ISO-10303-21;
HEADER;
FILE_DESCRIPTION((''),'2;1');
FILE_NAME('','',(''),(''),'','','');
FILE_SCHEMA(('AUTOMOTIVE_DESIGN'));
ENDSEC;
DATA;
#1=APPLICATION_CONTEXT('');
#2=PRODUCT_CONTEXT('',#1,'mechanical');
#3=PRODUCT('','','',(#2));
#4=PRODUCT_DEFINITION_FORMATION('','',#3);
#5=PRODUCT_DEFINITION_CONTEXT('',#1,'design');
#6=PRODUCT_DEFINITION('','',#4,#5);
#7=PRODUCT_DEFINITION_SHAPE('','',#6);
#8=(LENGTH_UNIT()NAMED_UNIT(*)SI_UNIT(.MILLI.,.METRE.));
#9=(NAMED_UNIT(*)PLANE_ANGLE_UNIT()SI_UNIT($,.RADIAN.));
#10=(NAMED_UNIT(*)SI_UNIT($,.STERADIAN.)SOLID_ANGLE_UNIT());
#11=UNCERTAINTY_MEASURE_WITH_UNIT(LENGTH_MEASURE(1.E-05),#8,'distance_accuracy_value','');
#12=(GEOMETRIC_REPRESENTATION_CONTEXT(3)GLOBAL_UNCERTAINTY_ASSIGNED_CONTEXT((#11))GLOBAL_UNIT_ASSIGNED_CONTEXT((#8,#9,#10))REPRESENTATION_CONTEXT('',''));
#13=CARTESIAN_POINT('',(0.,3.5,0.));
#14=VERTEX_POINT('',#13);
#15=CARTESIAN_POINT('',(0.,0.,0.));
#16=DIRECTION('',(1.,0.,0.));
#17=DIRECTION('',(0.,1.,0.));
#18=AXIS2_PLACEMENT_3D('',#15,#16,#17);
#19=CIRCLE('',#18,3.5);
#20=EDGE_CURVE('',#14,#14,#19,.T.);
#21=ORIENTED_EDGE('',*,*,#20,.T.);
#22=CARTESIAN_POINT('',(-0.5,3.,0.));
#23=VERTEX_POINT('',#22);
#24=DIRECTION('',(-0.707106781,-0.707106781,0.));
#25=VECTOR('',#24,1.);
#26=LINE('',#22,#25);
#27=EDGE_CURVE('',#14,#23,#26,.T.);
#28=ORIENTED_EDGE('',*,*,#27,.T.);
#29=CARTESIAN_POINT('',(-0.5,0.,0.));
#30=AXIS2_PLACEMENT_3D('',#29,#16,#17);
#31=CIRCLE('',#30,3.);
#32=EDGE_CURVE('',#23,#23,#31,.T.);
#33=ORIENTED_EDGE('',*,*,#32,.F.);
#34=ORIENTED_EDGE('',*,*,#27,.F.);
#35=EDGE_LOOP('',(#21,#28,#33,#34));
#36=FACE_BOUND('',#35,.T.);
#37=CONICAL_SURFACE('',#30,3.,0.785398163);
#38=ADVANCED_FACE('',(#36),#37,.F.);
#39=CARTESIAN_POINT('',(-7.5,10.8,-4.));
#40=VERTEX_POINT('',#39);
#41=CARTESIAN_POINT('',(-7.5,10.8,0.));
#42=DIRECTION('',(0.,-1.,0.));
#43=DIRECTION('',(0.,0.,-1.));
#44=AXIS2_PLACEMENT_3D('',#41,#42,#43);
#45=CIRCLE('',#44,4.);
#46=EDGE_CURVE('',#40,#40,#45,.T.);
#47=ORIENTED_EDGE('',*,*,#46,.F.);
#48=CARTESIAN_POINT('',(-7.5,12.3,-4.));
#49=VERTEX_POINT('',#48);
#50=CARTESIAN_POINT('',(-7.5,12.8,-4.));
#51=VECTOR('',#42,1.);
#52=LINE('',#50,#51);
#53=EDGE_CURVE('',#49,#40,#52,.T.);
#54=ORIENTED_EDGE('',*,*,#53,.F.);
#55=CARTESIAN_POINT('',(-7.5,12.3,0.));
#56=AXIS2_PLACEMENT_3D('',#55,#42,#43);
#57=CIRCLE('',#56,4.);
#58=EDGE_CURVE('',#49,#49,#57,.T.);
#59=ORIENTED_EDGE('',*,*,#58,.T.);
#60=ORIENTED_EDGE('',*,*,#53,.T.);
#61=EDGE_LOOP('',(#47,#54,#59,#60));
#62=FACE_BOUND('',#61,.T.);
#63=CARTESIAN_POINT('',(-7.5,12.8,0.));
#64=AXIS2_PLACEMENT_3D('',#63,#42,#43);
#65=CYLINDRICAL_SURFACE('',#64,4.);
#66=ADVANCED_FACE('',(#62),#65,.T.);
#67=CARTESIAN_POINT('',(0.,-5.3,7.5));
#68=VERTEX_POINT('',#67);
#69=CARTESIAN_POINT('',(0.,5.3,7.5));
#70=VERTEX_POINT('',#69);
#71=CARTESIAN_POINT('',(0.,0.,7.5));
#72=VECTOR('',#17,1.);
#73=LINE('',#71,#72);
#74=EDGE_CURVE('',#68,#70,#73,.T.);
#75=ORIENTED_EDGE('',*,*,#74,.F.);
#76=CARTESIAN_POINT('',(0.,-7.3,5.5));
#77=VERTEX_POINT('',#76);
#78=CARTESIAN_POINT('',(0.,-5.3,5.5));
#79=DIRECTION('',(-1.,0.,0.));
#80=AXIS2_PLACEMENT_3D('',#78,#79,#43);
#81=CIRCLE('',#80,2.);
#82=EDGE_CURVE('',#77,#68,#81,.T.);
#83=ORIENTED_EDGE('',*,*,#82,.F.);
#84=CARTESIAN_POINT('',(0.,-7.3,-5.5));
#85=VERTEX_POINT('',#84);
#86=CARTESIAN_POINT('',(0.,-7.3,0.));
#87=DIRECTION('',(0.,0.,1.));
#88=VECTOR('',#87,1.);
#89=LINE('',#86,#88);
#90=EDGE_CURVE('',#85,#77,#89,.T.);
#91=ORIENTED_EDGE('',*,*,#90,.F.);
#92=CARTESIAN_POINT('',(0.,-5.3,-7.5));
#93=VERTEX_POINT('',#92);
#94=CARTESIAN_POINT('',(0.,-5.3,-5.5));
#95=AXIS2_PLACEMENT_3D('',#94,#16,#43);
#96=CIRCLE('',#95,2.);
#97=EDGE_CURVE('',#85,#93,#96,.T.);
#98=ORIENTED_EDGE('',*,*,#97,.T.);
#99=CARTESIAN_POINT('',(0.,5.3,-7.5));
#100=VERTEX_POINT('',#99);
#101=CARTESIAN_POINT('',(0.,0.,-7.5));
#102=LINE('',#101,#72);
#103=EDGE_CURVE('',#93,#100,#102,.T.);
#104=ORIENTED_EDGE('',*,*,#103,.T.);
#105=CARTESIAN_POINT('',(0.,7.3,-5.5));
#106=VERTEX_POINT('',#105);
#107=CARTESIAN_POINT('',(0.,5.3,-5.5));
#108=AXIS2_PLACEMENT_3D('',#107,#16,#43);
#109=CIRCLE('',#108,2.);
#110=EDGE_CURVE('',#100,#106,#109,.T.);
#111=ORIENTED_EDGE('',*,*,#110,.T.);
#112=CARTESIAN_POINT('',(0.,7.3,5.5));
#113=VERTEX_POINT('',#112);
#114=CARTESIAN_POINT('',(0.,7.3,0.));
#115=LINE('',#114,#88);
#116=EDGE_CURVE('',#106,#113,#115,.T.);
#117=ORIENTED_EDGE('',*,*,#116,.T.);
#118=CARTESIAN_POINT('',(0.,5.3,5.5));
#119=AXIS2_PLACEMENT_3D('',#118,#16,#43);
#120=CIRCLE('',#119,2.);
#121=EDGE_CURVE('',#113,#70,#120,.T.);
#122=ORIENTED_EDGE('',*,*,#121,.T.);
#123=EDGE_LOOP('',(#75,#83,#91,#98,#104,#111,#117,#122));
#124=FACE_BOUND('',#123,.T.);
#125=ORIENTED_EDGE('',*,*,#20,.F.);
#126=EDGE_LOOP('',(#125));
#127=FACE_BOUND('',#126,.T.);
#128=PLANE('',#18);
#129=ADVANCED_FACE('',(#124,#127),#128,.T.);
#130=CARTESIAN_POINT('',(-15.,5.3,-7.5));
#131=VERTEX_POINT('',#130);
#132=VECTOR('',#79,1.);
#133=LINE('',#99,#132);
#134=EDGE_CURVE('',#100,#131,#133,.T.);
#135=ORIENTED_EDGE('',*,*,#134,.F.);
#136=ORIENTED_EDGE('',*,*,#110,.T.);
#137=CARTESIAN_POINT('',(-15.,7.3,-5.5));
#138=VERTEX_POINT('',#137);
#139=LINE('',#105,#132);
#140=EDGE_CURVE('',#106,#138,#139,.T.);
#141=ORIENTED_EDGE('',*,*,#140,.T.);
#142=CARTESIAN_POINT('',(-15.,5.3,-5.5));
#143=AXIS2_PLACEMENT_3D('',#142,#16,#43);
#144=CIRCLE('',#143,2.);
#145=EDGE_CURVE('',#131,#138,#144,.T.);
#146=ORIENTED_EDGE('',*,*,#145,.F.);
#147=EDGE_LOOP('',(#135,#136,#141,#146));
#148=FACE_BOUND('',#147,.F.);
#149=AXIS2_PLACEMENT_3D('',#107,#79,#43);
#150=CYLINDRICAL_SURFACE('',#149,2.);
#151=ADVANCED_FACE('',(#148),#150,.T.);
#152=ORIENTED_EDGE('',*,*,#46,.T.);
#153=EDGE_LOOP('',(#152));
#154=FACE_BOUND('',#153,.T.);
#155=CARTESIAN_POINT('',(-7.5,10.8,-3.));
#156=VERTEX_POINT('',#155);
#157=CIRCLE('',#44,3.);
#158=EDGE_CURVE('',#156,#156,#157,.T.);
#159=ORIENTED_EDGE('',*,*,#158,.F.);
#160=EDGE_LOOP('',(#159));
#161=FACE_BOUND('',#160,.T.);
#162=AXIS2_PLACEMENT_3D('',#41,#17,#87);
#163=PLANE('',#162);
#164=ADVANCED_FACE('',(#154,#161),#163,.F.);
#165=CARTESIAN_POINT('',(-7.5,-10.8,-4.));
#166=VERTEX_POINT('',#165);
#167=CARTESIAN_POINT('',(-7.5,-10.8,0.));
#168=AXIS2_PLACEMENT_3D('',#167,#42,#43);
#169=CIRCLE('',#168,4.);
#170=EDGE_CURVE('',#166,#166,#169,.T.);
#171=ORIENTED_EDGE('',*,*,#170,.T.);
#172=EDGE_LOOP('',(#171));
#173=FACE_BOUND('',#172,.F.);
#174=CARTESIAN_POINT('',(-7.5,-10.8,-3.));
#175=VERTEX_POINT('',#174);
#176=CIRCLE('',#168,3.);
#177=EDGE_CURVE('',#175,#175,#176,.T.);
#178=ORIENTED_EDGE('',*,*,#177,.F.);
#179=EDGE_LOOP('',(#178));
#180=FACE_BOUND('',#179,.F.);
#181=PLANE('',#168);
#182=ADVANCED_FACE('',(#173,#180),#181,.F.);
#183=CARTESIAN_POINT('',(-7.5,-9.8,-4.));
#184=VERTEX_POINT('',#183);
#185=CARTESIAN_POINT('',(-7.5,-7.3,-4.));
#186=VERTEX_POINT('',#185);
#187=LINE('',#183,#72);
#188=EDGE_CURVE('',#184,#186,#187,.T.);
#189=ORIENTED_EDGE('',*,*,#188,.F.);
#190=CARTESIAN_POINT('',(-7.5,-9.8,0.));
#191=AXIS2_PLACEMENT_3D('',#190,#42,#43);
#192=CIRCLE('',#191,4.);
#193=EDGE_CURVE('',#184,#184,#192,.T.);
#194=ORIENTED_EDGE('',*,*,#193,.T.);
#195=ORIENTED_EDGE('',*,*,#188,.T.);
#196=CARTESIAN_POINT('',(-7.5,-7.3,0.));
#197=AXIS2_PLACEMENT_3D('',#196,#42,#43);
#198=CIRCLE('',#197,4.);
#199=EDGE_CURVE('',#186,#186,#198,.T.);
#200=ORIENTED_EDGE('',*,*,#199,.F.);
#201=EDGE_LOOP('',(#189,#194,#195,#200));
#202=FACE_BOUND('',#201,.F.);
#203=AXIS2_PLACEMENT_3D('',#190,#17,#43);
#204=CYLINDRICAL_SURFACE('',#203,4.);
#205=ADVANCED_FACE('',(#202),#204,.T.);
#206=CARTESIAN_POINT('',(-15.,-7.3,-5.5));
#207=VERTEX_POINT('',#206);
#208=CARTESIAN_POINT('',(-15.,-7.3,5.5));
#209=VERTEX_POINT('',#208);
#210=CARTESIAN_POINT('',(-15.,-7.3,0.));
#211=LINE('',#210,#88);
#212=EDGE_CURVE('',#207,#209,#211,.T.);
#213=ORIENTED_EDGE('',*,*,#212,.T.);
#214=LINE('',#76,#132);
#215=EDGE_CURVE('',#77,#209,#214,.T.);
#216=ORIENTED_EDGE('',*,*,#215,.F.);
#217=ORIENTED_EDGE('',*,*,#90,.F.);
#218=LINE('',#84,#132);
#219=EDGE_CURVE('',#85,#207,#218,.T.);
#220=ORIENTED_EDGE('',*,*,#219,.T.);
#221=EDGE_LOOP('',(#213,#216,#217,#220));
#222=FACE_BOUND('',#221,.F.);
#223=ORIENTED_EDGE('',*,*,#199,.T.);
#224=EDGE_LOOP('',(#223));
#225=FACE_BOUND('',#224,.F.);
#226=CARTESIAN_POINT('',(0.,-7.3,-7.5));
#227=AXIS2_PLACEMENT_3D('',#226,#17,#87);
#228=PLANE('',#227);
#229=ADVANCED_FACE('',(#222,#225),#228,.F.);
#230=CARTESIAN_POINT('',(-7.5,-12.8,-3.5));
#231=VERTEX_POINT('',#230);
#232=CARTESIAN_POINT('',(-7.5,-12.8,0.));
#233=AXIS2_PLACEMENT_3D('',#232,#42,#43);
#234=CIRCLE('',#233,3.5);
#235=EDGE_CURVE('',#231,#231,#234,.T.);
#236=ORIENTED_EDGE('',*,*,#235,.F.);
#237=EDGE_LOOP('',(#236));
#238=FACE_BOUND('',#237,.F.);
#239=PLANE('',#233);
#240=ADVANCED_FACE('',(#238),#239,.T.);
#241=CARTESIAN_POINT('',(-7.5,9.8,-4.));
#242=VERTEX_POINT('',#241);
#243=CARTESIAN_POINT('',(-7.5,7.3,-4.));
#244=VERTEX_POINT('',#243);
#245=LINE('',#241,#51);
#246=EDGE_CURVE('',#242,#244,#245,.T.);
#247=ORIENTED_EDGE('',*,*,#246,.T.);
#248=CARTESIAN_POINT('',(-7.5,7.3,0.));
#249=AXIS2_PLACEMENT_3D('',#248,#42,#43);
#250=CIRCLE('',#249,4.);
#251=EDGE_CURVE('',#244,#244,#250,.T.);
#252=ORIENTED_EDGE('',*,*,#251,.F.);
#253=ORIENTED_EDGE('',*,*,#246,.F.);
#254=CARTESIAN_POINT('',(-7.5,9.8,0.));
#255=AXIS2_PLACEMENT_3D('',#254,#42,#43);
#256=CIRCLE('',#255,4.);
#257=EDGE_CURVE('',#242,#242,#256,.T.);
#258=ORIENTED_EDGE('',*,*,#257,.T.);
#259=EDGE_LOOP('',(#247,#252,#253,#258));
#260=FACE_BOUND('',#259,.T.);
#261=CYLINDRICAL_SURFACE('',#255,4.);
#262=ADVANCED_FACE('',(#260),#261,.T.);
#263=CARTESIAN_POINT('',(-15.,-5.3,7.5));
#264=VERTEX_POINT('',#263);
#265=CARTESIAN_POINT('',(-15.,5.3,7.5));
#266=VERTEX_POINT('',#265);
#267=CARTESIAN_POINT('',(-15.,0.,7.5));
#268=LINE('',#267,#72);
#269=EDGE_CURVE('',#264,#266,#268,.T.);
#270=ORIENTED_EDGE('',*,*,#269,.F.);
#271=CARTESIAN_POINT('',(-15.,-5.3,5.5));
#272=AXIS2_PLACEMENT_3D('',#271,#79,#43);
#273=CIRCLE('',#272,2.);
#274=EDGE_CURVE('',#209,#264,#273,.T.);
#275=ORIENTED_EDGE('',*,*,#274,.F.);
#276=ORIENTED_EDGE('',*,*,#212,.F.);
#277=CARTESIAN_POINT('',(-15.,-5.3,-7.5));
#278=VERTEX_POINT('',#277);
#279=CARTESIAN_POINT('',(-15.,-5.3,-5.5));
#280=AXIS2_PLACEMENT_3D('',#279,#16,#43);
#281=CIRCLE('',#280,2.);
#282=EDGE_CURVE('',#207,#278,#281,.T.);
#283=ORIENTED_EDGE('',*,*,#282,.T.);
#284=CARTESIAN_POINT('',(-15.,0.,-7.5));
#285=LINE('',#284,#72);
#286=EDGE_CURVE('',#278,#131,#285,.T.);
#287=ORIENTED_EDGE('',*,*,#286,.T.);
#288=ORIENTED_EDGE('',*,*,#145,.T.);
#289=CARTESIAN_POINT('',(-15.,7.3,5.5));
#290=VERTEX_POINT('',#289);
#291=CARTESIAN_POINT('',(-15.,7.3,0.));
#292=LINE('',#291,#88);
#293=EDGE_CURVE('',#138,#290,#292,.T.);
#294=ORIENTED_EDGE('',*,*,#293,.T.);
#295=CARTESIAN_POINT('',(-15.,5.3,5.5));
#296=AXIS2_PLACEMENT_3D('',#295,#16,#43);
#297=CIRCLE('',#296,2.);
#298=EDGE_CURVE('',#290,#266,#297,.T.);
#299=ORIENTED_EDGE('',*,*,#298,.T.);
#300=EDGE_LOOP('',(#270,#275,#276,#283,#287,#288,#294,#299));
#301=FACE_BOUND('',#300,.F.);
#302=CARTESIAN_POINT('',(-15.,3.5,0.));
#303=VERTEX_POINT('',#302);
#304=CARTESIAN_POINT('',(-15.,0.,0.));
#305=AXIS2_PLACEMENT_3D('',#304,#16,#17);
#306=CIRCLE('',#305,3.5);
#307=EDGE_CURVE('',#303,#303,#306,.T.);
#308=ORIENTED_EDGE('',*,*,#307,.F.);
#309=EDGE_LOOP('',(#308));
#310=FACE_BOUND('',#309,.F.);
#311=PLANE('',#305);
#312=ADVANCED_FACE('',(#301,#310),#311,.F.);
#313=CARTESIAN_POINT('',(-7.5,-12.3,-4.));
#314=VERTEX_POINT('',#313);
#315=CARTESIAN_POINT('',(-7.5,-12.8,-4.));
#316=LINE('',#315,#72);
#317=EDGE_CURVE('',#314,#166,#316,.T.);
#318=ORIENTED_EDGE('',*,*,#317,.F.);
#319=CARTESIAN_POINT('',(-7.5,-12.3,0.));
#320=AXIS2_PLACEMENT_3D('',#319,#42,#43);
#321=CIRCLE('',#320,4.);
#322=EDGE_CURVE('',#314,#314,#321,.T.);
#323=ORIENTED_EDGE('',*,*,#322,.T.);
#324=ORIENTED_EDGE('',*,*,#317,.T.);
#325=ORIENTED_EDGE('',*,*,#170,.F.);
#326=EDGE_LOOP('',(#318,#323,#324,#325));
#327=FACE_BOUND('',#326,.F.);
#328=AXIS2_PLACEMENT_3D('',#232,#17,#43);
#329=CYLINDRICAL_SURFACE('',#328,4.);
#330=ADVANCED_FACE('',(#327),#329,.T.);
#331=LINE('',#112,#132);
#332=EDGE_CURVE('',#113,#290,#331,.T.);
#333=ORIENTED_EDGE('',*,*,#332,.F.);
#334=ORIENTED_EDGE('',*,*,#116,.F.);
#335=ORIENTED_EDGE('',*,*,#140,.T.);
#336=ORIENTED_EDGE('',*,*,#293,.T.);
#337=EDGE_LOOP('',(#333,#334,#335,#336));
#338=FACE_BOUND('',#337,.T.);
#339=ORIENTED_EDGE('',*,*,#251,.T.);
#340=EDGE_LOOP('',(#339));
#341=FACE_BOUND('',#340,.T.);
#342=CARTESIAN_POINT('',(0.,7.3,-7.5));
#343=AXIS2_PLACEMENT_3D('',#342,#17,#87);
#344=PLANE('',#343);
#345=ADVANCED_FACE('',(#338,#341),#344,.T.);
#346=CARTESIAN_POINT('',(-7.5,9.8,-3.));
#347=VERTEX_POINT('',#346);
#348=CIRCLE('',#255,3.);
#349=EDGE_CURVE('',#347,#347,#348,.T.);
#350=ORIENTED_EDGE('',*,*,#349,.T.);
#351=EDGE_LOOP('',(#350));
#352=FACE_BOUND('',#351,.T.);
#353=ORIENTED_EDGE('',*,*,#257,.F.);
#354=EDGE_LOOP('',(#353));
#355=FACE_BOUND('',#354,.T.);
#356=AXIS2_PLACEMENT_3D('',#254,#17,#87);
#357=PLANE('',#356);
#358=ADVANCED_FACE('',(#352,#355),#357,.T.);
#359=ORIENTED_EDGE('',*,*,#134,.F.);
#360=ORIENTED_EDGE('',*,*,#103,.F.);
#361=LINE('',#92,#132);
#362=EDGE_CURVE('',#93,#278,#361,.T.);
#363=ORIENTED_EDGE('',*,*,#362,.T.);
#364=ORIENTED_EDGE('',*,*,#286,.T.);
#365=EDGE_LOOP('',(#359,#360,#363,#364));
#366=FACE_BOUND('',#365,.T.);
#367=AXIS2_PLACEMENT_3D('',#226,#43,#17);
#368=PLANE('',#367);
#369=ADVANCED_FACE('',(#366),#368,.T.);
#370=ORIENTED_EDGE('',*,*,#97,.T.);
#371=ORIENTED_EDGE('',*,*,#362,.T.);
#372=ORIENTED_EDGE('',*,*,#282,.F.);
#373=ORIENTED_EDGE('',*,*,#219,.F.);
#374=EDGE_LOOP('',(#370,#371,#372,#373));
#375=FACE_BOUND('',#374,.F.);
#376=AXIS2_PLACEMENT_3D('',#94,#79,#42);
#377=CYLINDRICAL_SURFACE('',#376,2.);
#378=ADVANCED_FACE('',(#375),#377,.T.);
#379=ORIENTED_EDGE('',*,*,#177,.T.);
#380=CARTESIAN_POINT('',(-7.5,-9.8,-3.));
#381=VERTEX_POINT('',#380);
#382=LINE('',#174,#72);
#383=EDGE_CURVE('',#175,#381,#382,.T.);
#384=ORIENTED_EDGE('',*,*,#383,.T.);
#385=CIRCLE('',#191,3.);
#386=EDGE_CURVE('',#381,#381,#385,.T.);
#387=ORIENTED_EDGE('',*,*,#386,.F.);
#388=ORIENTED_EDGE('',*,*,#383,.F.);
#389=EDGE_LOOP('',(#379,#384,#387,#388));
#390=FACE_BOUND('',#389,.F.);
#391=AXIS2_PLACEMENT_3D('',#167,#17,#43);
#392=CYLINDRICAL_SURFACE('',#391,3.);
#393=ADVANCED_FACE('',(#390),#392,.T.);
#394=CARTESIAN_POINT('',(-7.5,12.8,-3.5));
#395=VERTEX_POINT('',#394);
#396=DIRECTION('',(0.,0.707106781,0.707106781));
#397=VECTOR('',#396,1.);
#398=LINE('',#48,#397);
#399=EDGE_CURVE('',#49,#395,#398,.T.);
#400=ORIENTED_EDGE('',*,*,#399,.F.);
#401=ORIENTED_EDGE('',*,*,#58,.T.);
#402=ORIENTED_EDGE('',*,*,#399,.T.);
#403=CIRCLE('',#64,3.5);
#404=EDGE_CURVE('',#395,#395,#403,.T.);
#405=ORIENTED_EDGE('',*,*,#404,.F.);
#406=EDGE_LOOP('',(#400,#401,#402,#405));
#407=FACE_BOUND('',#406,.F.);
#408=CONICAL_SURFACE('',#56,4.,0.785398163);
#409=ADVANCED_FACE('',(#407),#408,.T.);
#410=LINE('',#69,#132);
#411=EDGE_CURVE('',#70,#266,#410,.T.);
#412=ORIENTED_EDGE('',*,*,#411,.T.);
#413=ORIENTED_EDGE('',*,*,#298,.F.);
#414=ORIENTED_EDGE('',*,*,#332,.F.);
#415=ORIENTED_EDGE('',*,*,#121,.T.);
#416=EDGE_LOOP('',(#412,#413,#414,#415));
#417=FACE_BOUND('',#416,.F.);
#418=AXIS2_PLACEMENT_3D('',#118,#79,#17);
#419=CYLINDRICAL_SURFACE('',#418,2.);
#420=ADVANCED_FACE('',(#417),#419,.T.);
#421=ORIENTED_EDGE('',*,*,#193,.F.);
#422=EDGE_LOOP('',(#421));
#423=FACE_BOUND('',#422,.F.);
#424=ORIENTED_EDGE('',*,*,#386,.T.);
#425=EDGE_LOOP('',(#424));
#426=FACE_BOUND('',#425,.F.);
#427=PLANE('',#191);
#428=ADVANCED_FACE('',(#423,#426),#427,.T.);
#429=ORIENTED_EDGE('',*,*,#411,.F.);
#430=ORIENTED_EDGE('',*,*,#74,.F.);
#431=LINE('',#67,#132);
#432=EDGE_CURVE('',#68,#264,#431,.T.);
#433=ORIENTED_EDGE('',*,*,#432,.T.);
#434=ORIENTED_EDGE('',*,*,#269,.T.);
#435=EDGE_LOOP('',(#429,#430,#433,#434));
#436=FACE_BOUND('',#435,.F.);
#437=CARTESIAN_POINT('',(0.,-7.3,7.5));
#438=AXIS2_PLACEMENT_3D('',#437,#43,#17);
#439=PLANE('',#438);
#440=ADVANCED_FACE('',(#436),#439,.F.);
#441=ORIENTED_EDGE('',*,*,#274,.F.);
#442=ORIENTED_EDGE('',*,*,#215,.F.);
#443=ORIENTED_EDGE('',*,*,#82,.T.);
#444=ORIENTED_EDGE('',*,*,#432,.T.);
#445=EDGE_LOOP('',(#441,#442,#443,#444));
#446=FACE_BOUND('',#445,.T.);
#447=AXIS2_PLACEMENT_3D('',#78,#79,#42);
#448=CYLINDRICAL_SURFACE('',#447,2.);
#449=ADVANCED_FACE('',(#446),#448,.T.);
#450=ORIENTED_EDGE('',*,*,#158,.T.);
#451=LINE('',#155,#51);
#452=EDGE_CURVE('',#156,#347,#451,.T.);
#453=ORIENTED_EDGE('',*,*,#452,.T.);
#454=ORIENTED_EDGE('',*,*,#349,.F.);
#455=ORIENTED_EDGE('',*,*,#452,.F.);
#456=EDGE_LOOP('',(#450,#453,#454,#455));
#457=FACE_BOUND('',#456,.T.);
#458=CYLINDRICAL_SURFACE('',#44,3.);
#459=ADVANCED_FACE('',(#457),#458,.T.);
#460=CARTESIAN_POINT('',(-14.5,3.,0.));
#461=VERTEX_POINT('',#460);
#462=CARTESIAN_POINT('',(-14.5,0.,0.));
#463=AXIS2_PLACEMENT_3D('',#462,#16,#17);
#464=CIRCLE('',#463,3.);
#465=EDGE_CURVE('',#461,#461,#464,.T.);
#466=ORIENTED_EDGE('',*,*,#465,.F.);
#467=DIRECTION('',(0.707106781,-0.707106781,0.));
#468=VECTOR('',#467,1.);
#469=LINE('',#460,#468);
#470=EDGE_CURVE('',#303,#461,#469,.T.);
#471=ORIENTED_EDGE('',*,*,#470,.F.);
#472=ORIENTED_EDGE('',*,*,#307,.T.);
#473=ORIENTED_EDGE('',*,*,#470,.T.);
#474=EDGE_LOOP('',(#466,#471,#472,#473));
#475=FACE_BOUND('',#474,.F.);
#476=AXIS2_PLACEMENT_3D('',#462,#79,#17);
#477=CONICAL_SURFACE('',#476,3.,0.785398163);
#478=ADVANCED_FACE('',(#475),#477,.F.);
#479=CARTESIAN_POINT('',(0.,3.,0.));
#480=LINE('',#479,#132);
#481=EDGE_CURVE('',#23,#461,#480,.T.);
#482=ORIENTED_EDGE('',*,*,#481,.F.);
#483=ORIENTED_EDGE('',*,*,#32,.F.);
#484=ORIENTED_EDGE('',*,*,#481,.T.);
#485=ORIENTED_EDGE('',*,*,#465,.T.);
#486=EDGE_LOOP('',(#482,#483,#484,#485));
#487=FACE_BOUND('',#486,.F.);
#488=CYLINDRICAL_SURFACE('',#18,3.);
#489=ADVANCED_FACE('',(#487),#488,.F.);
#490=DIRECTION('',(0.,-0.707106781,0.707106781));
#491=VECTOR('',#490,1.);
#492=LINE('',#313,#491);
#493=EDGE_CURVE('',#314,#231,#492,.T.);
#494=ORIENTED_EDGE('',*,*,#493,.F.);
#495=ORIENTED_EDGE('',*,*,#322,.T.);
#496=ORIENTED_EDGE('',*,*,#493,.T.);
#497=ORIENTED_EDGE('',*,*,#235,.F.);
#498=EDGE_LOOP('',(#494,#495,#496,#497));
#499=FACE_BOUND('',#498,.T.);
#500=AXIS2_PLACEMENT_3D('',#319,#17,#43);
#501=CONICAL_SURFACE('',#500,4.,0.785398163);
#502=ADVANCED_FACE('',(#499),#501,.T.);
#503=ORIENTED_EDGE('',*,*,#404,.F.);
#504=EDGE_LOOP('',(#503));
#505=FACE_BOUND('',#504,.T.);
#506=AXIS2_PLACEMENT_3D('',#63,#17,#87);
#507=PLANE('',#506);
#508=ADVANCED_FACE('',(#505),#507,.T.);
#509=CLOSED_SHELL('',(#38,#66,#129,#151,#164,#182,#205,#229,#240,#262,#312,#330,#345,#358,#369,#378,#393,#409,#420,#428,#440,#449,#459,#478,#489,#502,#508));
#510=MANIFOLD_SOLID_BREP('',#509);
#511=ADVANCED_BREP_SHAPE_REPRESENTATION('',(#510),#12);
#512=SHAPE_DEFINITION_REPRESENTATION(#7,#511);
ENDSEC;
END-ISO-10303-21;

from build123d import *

# Parameters (mm, degrees)
F0_W     = 14.6
F0_H     = 15
F1_DEPTH = 15
F2_R     = 2
F3_R     = 3
F4_DEPTH = 15.001
F5_SIZE2 = 0.5
F5_SIZE  = 0.5
F9_SIZE2 = 0.5
F9_SIZE  = 0.5


# Not quite as in the source:
# - a pattern or mirror of a feature is missing from the dataset's text; its kind, count and spacing are read off the source's solid


with BuildPart() as f1:
    # F0 (on Right) → F1 (new body)
    with BuildSketch(Plane.YZ):
        Rectangle(F0_W, F0_H)
    extrude(amount=-F1_DEPTH)

    # F2
    f2_edges = [f1.edges().sort_by_distance(p)[0] for p in [
        (-7.5, -7.3, 7.5),
        (-7.5, 7.3, 7.5),
        (-7.5, -7.3, -7.5),
        (-7.5, 7.3, -7.5),
    ]]
    fillet(f2_edges, radius=F2_R)

    # F3 (on face) → F4 (cut, through all)
    with BuildSketch(Plane.YZ):
        Circle(F3_R)
    extrude(amount=-F4_DEPTH, mode=Mode.SUBTRACT)

    # F5
    f5_edges = [f1.edges().sort_by_distance(p)[0] for p in [
        (0, -3, 0),
        (-7.5, 3, 0),
        (-15, -3, 0),
    ]]
    chamfer(f5_edges, length=F5_SIZE, length2=F5_SIZE2)

    # F7 (on mid) → F8 (revolve)
    with BuildSketch(Plane.YZ.offset(-7.5)):
        Polygon((-7.3, 0), (-12.8, 0), (-12.8, -4), (-10.8, -4), (-10.8, -3), (-9.8, -3), (-9.8, -4), (-7.3, -4), align=None)
    f8 = revolve(axis=Axis((-7.5, -3.65, 0), (0, -1, 0)))

    # F8_copies: F8 across plane
    add(f8.mirror(Plane.ZX))

    # F9
    f9_edges = [f1.edges().sort_by_distance(p)[0] for p in [
        (-7.5, -12.8, 4),
        (-7.5, 12.8, 4),
    ]]
    chamfer(f9_edges, length=F9_SIZE, length2=F9_SIZE2)


solid = f1.part
